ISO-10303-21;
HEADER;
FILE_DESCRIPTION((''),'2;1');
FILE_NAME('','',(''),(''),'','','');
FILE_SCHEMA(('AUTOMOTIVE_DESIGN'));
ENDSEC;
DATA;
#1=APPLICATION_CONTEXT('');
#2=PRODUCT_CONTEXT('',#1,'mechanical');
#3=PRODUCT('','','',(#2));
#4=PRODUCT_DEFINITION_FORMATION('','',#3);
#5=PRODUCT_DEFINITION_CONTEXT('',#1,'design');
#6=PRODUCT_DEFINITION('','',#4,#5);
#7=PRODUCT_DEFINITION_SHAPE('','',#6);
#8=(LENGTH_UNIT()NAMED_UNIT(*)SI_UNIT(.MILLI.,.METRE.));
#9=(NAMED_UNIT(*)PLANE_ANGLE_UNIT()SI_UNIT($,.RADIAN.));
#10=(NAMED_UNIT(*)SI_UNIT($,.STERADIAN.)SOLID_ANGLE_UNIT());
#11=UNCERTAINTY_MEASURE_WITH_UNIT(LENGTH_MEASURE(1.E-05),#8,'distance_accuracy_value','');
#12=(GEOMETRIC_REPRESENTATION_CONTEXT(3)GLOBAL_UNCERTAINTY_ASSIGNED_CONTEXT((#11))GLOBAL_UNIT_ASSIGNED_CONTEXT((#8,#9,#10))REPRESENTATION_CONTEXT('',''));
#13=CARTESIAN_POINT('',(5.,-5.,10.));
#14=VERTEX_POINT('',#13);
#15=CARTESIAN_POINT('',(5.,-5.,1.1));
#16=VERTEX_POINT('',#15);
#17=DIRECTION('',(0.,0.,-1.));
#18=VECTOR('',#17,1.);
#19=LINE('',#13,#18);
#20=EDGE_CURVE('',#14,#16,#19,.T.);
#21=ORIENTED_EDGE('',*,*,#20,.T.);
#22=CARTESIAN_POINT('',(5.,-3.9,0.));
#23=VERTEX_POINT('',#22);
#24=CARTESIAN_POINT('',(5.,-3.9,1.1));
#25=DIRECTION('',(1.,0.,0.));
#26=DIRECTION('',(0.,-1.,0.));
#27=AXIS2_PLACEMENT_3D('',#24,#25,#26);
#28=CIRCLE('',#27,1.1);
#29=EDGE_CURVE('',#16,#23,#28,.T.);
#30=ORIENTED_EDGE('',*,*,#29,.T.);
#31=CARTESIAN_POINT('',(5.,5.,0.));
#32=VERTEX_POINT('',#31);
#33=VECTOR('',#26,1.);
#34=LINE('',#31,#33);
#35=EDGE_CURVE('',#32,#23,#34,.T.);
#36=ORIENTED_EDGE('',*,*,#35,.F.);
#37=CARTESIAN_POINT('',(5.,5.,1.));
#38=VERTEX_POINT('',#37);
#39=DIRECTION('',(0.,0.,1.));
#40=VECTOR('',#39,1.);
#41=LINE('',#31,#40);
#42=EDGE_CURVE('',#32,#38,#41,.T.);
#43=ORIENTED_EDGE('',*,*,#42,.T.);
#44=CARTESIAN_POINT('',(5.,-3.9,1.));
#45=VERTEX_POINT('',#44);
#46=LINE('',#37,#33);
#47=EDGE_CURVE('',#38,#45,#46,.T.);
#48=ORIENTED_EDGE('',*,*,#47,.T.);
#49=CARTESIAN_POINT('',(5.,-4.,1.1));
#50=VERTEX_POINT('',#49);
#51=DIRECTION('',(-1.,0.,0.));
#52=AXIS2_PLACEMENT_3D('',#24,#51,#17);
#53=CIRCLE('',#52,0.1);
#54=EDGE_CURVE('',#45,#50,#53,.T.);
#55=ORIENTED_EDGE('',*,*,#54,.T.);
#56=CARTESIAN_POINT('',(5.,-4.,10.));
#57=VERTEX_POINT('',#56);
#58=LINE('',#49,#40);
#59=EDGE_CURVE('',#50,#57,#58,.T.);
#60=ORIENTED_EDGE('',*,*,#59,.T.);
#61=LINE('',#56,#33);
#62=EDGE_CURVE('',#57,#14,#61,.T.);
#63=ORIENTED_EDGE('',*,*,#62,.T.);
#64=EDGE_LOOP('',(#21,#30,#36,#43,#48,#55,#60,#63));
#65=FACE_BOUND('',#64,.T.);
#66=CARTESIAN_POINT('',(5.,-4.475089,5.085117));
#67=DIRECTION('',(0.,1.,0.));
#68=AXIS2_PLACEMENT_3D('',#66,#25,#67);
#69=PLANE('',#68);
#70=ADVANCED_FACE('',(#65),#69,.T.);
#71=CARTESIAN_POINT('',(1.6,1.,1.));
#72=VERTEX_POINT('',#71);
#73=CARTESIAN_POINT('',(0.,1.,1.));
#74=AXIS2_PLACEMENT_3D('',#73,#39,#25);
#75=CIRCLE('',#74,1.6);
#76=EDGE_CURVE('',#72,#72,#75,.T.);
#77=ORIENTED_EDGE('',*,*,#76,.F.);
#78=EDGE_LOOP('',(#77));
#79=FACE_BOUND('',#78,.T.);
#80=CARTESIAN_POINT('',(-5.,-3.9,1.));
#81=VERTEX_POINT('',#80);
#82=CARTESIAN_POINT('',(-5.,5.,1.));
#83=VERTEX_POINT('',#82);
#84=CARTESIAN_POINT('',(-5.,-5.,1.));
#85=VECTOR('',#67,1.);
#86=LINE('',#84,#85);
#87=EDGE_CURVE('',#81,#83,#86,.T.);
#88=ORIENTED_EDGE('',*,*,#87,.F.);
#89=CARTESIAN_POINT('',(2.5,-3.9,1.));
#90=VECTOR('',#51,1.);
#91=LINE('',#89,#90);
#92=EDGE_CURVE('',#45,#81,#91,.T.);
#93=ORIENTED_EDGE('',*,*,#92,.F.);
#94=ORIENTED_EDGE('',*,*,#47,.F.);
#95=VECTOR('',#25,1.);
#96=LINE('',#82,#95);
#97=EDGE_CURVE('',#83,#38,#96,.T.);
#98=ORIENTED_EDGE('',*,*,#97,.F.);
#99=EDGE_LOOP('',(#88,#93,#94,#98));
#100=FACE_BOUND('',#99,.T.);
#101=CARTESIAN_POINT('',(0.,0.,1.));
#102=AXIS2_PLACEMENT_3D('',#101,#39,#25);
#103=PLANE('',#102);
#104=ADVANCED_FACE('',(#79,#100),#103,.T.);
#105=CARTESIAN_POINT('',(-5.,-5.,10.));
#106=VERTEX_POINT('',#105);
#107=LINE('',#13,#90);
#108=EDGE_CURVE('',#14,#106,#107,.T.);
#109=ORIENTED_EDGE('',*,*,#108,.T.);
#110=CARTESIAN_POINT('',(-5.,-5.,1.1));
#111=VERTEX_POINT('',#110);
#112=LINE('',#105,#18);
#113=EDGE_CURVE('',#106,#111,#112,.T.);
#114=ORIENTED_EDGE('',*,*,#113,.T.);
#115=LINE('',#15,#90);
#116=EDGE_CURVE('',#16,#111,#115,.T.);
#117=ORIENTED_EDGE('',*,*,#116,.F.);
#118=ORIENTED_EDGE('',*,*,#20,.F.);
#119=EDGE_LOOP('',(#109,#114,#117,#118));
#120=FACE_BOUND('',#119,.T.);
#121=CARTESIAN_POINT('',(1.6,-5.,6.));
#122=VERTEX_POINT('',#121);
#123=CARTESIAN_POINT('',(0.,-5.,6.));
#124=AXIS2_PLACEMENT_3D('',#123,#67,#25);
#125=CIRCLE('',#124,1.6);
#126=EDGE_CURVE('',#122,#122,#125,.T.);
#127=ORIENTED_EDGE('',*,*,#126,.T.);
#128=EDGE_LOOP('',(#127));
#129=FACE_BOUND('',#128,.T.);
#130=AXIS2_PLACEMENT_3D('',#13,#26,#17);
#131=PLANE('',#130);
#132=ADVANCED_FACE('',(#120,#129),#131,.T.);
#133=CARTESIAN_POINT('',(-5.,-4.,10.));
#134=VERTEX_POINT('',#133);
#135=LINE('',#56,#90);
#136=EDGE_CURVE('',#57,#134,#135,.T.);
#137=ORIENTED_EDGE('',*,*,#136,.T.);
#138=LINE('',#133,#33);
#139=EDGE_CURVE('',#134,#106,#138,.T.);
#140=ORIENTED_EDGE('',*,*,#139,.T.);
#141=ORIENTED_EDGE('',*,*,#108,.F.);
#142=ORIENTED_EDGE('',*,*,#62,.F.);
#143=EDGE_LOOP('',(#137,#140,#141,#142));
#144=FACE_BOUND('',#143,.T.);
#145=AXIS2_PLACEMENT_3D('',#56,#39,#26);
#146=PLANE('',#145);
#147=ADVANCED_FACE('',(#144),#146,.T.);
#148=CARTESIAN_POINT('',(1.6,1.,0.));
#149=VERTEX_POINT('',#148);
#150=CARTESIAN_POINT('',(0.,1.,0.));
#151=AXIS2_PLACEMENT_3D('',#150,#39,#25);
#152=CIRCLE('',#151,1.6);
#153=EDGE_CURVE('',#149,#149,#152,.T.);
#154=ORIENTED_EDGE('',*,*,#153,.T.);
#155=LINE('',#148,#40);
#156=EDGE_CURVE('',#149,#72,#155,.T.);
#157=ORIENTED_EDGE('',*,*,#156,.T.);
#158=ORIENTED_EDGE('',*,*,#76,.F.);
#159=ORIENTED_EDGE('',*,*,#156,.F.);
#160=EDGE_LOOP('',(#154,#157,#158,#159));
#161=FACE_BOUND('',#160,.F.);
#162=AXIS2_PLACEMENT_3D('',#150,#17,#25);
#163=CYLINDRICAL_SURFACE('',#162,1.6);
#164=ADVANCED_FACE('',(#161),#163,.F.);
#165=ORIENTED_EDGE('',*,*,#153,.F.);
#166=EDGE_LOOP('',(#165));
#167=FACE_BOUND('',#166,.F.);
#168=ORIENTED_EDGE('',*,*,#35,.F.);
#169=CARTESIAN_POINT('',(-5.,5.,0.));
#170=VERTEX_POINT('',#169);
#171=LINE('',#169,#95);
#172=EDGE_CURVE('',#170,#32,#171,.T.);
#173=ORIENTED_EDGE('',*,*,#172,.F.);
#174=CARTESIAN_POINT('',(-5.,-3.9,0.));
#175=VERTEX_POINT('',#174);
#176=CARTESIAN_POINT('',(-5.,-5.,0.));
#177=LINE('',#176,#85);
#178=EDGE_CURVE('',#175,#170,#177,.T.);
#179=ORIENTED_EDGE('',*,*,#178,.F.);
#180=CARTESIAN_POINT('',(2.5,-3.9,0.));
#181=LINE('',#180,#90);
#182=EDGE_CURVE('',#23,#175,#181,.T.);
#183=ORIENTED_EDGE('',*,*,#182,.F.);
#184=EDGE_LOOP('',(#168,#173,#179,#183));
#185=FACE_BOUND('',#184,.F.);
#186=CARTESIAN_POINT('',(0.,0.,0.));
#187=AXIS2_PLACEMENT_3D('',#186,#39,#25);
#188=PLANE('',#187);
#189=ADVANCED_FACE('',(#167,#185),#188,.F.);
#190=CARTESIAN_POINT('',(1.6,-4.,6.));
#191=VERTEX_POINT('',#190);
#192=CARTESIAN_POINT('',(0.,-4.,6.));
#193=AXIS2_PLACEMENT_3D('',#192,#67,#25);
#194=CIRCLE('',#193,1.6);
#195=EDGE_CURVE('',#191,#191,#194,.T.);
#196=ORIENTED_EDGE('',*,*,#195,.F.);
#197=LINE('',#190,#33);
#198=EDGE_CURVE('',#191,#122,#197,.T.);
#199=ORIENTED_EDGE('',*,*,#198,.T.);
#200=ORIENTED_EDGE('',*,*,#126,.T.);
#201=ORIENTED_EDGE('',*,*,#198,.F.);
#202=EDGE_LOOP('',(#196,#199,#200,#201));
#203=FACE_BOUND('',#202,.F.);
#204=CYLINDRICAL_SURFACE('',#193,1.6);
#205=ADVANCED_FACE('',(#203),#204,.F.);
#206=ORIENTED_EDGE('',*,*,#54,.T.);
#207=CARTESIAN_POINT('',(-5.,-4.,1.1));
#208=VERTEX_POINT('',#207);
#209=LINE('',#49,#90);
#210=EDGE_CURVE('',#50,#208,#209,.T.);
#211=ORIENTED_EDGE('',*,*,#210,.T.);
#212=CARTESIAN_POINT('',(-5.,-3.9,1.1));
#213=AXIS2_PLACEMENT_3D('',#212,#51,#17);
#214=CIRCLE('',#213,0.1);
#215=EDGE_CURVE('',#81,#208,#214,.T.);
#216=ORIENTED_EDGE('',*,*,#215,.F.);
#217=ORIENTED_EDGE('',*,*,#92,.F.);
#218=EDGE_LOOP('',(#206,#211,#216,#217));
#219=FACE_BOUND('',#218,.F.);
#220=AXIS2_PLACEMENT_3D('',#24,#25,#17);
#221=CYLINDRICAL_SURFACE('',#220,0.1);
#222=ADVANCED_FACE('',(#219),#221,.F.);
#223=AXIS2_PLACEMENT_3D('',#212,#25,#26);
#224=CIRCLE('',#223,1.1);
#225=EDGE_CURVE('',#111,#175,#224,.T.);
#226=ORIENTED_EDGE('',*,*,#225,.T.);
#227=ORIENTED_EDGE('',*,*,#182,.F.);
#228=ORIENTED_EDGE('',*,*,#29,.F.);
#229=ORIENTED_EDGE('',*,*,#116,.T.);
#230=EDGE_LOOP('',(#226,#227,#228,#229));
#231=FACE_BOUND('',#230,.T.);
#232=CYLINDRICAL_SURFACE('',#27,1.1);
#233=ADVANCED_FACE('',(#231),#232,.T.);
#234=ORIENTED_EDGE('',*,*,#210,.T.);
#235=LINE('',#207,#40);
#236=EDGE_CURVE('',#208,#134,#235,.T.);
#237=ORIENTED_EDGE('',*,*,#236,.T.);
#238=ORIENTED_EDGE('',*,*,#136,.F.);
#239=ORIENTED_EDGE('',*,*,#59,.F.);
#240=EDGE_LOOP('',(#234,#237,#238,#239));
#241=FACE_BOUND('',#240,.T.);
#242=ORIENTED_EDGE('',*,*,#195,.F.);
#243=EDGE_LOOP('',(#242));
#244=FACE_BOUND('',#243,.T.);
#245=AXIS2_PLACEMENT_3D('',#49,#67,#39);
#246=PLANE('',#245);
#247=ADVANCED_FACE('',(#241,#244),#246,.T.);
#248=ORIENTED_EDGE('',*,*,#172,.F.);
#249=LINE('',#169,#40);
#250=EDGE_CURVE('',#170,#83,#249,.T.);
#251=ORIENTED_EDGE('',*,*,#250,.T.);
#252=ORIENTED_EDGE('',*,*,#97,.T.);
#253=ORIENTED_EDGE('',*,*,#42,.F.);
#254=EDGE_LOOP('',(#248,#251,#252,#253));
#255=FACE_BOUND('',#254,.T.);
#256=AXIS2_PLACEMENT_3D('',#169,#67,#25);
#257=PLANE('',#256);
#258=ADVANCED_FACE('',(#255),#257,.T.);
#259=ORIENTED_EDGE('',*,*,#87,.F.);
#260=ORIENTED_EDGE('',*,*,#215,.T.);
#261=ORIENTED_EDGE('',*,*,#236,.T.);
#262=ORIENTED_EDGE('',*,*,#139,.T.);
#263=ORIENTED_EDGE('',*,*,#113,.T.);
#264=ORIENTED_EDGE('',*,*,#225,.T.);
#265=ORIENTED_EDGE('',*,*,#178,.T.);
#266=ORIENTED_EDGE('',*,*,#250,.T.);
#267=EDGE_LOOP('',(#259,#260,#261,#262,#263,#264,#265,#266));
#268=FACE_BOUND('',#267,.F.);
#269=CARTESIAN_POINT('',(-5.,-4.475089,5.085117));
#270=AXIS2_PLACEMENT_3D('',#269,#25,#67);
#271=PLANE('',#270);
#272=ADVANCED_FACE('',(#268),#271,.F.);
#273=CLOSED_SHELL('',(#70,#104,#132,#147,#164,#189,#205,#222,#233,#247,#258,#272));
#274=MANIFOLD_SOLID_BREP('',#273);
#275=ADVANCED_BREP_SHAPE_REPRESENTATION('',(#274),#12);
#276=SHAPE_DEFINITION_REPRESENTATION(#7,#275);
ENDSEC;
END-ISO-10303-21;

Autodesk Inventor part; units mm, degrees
ref_plane "YZ Plane" through (0, 0, 0) normal (1, 0, 0) x (0, 1, 0)
ref_plane "XZ Plane" through (0, 0, 0) normal (0, 1, 0) x (-1, 0, 0)
ref_plane "XY Plane" through (0, 0, 0) normal (0, 0, 1) x (1, 0, 0)
sketch "Sketch1" plane through (0, 0, 0) normal (0, 0, 1) x (1, 0, 0)
  line L0 (-5, 5) -> (5, 5)
  line L1 (5, 5) -> (5, -5)
  line L2 (5, -5) -> (-5, -5)
  line L3 (-5, -5) -> (-5, 5)
  line L4 (-5, 5) -> (5, -5) construction
  line L5 (5, 5) -> (-5, -5) construction
  circle A0 centre (0, 1) radius 1.6
  point P0 (0, 0)
  dimension "d0" = 10
  dimension "d1" = 10
  dimension "d3" = 3.2
  dimension "d21" = 4
extrude "Plate1" add sketch "Sketch1" along normal blind 1
sketch "Sketch2" plane through (5, -4, 0) normal (0, -1, 0) x (1, 0, 0)
  line L0 (-10, 0) -> (0, 0)
  line L1 (0, 0) -> (0, 10)
  line L2 (0, 10) -> (-10, 10)
  line L3 (-10, 10) -> (-10, 0)
edge flange "Flange1" height 10 angle 90 thickness 1 bend radius 0.1 thickness toward (0, -1, 0) relief tear relief width 1 relief depth 0.5 edges at (0, -5, 1) wall of the first edge with corners at (-5, -4, 0) (5, -4, 0) (5, -4, 10) (-5, -4, 10)
bend "Bend1"
corner "Corner1"
sketch "Sketch3" plane through (-5, -4, 10) normal (0, 1, 0) x (1, 0, 0)
  circle A0 centre (5, 4) radius 1.6
  line L0 (0, 9) -> (10, 9) projected
  line L1 (0, 0) -> (10, 0) projected
  point P0 (5, 10)
  point P1 (5, 0)
  dimension "d17" = 3.2
  dimension "d22" = 4
extrude "Cut1" cut sketch "Sketch3" against normal blind 1
equation "\"d19\" = 厚度"
equation "\"d6\" = 厚度"
equation "\"d7\" = 折彎離隙寬度"
equation "\"d8\" = 折彎離隙深度"
equation "\"d9\" = 最小剩餘"
equation "\"d10\" = 轉移半徑"
equation "\"d14\" = 轉角離隙大小"
equation "\"d15\" = 間隙大小"
equation "\"d16\" = Jacobi半徑大小"
equation "\"折彎半徑\" = 厚度"
equation "\"折彎離隙寬度\" = 厚度"
equation "\"折彎離隙深度\" = 0.5 * 厚度"
equation "\"轉角離隙大小\" = 4 * 厚度"
equation "\"最小剩餘\" = 2 * 厚度"
equation "\"轉移半徑\" = 折彎半徑"
equation "\"Jacobi半徑大小\" = 折彎半徑"
equation "\"間隙大小\" = 厚度"
equation "\"厚度\" = 1"
properties part number "connector"
